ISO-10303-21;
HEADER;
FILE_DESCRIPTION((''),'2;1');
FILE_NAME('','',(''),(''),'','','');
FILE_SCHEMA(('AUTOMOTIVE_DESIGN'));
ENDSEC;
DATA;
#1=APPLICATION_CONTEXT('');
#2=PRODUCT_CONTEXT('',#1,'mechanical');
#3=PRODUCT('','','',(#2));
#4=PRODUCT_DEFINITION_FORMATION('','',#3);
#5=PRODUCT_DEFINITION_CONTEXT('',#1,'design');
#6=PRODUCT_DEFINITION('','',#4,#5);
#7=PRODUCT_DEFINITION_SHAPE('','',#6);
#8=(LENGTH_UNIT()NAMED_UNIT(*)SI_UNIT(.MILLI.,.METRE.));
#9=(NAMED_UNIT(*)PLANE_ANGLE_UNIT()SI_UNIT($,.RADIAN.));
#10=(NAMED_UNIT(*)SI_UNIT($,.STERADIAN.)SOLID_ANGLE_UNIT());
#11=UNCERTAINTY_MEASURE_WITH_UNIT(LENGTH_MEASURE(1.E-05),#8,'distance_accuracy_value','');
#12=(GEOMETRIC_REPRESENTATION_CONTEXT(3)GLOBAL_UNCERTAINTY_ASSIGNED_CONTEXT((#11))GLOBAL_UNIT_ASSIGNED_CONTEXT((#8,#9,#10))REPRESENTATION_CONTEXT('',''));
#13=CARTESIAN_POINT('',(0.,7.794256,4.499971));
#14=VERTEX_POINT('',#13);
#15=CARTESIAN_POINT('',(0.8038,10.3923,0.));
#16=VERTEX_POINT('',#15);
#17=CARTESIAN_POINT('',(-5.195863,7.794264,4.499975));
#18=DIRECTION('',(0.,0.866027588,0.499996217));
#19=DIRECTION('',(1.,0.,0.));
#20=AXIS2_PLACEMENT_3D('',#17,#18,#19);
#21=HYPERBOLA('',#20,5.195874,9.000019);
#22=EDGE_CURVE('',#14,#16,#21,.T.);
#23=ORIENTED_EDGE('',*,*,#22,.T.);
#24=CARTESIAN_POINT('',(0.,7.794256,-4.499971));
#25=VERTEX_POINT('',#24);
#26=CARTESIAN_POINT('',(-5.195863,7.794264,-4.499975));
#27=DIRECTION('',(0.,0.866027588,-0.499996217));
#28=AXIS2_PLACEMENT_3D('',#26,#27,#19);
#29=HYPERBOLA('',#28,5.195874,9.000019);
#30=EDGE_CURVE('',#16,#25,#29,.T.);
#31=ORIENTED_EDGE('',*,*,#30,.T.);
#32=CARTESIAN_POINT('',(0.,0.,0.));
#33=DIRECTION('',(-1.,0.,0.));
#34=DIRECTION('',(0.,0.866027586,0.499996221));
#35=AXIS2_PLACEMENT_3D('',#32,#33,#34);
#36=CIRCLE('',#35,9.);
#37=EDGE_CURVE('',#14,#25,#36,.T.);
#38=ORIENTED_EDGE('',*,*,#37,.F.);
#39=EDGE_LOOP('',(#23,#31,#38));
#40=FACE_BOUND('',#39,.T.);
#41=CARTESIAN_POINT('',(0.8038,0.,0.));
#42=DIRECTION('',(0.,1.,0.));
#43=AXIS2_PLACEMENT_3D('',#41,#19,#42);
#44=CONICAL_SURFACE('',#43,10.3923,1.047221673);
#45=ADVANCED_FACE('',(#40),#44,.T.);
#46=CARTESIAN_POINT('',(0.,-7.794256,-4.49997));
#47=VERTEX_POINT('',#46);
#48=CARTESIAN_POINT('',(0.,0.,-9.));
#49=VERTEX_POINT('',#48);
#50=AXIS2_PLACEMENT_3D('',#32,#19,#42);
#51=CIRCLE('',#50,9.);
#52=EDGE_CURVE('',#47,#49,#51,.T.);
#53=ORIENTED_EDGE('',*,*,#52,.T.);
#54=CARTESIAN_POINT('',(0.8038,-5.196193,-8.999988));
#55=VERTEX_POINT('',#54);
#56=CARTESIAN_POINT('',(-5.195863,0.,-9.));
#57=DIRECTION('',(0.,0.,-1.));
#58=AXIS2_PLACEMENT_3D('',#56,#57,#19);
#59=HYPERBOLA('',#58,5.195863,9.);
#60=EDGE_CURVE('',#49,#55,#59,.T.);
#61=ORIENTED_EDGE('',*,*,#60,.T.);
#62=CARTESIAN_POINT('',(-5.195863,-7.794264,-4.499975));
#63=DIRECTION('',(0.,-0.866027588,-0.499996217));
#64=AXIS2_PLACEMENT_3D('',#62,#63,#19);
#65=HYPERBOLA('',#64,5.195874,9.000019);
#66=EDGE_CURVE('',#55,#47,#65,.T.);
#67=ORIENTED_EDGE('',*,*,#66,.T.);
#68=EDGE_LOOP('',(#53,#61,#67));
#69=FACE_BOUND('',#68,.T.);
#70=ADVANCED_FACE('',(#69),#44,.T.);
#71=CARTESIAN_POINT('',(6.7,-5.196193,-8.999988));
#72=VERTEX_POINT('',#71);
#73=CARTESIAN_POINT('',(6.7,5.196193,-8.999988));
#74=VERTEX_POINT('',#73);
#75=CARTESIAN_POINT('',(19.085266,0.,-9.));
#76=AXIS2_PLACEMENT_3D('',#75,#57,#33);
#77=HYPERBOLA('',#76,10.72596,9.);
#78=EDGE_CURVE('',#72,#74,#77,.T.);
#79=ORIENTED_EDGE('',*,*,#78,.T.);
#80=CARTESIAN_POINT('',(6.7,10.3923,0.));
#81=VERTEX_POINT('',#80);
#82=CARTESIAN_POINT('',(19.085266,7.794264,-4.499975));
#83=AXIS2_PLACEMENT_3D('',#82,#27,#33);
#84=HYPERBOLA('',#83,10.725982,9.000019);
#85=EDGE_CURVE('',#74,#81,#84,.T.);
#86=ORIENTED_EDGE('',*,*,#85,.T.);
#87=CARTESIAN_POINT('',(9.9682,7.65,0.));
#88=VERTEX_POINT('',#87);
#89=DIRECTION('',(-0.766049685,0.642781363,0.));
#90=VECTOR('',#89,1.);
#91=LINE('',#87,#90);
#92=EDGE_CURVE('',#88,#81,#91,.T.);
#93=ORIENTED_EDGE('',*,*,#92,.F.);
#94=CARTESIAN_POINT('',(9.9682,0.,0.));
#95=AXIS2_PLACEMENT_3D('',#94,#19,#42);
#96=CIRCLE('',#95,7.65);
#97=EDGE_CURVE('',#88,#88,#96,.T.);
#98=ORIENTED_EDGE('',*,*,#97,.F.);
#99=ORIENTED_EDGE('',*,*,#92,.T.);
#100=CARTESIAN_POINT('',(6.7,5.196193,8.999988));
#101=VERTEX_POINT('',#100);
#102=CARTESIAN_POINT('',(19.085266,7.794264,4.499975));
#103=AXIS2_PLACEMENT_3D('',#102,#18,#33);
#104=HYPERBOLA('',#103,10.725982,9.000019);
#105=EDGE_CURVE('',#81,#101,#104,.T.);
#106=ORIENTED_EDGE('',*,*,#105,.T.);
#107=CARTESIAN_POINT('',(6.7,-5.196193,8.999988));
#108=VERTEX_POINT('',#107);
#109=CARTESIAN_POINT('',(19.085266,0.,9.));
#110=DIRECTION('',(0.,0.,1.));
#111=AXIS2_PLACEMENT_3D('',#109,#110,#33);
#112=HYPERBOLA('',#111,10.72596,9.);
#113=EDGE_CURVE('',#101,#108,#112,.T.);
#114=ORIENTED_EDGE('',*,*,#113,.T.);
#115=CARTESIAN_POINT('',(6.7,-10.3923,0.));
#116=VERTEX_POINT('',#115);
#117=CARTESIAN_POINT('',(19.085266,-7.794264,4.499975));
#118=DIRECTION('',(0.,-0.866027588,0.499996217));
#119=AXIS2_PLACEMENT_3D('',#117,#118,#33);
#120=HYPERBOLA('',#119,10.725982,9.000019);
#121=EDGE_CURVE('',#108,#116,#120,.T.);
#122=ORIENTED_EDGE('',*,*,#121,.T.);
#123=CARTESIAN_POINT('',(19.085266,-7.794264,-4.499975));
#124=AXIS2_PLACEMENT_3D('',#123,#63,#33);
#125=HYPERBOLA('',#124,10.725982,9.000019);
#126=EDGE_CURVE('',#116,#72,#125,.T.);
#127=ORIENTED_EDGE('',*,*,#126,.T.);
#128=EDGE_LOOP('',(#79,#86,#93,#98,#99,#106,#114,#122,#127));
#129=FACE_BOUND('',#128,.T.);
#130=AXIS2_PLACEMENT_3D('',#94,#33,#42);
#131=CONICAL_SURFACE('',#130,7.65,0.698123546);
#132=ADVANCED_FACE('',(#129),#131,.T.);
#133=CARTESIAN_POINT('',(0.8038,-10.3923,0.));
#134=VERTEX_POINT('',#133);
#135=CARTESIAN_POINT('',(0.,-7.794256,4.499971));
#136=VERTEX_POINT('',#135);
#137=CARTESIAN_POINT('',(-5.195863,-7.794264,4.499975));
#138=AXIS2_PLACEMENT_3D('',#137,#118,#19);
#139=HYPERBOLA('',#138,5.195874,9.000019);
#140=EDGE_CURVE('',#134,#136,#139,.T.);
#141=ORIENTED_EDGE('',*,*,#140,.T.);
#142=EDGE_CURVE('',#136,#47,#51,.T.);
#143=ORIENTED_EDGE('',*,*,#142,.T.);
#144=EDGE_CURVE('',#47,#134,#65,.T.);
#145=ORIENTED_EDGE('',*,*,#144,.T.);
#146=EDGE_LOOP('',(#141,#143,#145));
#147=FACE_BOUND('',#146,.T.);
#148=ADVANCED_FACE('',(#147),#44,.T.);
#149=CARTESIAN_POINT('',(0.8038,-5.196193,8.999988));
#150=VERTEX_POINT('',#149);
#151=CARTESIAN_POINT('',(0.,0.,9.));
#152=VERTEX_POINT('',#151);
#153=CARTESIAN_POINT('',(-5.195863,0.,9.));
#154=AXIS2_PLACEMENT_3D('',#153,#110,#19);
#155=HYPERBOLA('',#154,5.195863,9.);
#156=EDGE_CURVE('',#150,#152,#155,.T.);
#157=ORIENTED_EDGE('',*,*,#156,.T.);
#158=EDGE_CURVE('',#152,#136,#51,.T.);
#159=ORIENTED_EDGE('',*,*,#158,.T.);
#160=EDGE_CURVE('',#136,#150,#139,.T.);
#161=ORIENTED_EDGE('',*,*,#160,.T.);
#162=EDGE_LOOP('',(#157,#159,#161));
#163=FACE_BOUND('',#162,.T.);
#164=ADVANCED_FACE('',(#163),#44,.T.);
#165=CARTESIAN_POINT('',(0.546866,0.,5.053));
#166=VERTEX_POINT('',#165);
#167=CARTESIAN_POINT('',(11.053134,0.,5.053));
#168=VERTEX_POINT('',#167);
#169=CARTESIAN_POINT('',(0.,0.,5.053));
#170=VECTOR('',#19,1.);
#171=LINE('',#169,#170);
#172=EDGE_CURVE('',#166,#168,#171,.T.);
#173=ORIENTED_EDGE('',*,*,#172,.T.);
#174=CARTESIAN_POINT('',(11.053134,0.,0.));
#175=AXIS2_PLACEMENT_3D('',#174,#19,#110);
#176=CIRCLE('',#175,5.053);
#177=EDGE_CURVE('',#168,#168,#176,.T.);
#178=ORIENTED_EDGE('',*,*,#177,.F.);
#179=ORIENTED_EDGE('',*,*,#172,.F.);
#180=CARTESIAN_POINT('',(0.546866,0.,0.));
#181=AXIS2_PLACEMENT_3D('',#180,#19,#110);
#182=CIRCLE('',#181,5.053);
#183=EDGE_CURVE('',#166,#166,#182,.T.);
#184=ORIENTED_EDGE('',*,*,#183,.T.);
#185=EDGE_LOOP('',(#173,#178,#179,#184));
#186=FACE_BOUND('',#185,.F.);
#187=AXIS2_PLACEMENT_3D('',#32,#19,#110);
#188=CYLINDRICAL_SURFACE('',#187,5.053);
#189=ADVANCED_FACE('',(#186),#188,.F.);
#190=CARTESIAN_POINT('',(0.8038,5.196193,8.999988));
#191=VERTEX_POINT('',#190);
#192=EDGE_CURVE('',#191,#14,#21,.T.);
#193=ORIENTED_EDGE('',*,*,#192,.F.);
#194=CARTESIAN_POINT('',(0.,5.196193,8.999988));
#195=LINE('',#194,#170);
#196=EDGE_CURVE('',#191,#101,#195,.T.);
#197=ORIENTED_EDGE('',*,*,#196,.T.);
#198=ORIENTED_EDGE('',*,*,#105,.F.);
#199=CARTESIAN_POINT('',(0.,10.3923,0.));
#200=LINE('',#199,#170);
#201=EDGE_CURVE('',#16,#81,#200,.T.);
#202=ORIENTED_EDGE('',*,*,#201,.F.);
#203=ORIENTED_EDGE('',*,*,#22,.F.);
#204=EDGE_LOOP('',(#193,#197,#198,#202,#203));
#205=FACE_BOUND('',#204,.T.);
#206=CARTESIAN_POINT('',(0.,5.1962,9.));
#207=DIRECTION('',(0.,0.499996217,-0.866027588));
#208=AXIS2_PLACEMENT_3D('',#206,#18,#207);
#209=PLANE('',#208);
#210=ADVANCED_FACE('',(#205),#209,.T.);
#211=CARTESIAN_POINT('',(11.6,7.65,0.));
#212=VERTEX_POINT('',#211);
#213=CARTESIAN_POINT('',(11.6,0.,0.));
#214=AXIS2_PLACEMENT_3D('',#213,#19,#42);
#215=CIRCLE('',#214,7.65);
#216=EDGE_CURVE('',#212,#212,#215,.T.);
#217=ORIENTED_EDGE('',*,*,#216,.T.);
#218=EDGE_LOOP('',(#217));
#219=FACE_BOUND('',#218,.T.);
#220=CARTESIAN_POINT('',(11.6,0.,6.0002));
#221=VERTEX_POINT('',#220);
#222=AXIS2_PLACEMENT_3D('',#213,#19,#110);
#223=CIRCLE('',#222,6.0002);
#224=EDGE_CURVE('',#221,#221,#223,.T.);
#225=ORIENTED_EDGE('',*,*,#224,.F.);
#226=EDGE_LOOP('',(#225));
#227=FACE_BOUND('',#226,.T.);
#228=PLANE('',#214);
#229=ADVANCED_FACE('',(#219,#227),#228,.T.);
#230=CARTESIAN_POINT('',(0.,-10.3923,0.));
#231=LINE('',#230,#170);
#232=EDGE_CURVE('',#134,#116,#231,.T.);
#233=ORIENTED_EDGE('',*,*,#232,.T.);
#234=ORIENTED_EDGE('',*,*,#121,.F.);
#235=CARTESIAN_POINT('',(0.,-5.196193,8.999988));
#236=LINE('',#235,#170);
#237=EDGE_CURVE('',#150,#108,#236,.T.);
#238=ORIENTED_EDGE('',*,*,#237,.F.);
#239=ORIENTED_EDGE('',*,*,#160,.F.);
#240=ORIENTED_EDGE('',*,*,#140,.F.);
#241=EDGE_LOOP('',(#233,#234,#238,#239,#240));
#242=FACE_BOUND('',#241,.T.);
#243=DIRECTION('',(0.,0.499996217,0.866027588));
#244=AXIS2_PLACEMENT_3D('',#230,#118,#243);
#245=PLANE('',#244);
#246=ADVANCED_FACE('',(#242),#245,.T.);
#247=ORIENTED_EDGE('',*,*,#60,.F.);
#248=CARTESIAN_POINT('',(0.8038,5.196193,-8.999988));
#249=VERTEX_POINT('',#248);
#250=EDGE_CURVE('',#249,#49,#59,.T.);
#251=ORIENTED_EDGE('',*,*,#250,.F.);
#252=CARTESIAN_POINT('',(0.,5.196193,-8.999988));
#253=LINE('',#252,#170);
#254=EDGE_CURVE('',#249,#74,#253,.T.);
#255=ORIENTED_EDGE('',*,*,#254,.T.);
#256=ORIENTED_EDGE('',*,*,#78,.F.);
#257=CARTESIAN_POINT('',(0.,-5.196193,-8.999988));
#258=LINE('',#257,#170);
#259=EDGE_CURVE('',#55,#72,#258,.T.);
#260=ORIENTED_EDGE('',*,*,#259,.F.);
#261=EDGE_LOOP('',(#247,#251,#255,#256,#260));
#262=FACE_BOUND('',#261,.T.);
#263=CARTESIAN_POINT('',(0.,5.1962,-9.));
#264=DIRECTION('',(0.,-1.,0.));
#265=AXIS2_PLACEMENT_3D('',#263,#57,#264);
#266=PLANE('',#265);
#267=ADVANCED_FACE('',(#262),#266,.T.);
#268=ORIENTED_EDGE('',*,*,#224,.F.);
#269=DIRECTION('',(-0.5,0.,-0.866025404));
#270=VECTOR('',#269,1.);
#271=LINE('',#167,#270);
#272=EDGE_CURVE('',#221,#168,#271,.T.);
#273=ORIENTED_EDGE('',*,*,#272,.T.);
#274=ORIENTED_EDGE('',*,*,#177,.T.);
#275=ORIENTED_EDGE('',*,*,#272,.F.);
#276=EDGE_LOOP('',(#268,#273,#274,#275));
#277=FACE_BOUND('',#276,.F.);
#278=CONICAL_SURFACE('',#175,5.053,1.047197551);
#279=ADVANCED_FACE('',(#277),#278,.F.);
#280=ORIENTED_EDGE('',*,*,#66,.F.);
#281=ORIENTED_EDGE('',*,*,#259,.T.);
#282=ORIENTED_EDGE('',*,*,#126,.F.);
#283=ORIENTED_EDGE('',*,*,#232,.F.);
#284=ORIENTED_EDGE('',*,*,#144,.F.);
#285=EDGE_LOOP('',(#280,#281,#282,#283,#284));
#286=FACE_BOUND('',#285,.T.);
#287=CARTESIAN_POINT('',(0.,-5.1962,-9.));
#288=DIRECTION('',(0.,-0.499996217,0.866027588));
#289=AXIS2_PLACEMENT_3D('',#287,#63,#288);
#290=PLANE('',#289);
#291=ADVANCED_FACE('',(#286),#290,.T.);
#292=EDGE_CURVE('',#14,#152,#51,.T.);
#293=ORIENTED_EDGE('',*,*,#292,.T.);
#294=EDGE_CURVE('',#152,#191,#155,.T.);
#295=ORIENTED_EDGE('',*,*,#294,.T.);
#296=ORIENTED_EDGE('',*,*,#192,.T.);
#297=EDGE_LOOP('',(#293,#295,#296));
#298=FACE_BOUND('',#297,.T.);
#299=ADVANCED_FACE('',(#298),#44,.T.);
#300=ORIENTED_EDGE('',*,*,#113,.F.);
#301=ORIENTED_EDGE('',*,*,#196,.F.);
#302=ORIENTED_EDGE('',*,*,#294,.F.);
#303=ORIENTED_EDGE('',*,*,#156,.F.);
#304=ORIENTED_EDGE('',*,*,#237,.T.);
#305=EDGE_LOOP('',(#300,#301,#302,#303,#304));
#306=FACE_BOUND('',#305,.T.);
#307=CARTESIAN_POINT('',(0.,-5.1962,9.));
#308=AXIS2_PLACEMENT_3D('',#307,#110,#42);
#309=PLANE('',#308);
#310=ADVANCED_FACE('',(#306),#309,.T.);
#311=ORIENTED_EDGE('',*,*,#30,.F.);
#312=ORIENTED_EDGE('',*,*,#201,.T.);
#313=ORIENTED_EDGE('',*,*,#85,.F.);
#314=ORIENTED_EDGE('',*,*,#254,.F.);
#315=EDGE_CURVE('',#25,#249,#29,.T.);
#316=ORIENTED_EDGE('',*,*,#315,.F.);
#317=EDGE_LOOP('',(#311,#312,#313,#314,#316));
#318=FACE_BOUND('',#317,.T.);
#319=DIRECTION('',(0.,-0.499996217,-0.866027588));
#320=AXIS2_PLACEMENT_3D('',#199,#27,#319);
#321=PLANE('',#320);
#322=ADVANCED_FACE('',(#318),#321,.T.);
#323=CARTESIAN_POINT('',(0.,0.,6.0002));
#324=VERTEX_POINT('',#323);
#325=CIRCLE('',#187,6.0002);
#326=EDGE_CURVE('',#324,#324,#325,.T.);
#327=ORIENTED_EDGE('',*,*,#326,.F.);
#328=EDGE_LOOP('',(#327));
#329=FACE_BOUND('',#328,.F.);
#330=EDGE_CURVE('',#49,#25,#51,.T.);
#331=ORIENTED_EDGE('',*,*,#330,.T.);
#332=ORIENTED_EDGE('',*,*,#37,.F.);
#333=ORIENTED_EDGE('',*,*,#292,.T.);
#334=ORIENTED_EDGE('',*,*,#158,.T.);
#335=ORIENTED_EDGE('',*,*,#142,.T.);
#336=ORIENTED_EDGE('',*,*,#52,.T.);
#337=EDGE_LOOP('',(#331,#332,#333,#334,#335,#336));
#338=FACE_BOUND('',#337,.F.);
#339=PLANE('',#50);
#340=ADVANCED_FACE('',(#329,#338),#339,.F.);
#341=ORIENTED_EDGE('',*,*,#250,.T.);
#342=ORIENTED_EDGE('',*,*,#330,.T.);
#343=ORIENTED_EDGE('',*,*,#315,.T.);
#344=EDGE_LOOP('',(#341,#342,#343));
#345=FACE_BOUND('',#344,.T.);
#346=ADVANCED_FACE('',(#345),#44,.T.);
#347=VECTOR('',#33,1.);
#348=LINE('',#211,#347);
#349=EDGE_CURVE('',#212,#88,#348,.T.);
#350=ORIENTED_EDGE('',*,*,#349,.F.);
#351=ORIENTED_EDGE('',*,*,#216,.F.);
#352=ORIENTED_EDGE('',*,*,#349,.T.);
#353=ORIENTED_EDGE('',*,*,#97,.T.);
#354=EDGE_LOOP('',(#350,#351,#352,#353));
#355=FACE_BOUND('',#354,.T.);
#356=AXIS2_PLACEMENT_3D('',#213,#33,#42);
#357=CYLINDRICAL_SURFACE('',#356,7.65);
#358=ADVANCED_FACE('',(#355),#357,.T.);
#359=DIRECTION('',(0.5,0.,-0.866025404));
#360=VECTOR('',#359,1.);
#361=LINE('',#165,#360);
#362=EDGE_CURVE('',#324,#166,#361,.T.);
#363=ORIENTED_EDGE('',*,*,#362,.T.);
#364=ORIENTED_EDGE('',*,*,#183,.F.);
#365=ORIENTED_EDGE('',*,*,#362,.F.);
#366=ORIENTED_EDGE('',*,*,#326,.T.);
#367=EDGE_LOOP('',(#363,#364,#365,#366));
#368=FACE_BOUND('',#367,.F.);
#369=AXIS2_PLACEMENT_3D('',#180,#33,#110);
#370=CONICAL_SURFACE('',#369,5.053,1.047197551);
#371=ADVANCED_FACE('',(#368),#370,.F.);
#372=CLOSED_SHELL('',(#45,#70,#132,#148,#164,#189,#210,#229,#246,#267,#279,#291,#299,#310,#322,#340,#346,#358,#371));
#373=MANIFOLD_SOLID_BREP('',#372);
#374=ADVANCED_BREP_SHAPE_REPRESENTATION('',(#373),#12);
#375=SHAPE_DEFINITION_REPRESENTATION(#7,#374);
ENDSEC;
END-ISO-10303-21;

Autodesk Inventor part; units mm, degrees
ref_plane "YZ Plane" through (0, 0, 0) normal (1, 0, 0) x (0, 1, 0)
ref_plane "XZ Plane" through (0, 0, 0) normal (0, 1, 0) x (-1, 0, 0)
sketch "Náčrt1" plane through (0, 0, 0) normal (1, 0, 0) x (0, 1, 0)
  line L0 (-10.3923, 0) -> (-5.1962, 9)
  line L1 (-5.1962, 9) -> (5.1962, 9)
  line L2 (5.1962, 9) -> (10.3923, 0)
  line L3 (10.3923, 0) -> (5.1962, -9)
  line L4 (5.1962, -9) -> (-5.1962, -9)
  line L5 (-5.1962, -9) -> (-10.3923, 0)
  point P0 (0, 0)
  point P1 (0, 0)
  dimension "d0" = 20.7846
extrude "Těleso" add sketch "Náčrt1" along normal blind 11.6
sketch "Náčrt2" plane through (0, 0, 0) normal (-1, 0, 0) x (0, 0, 1)
  line L0 (0, -14.5492) -> (0, 14.5492) projected
  line L1 (-12.6, 0) -> (12.6, 0) projected
  point P0 (0, 0)
hole "Závit" at (0, 0, 0) direction (1, 0, 0) diameter 10.106 end through all thread size "M12x1.75" class "6H" standard "ANSI Metric M Profile"
chamfer "Zkosení1" distance 0.9472 angle 30 1 edges at (0, 0, -5.053) measured on face at (0, -6.5823, -3.9568)
chamfer "Zkosení2" distance 0.9472 angle 30 1 edges at (11.6, 0, -5.053) measured on face at (11.6, -6.5823, -3.9568)
sketch "Náčrt3" plane through (0, 0, 0) normal (0, 0, 1) x (1, 0, 0)
  line L0 (0, 5.1962) -> (0, 10.3923) projected
  line L1 (0, 10.3923) -> (11.6, 10.3923) projected
  line L2 (11.6, 5.1962) -> (11.6, 10.3923) projected
  line L3 (-2.32, 0) -> (13.92, 0) projected
  line L4 (0.8038, 10.3923) -> (0, 9)
  line L5 (11.6, 7.65) -> (9.9682, 7.65)
  line L6 (9.9682, 7.65) -> (6.7, 10.3923)
  dimension "d3" = 30
  dimension "d5" = 18
  dimension "d6" = 15.3
  dimension "d8" = 50
  dimension "d9" = 6.7
revolve "Zkosení3" cut sketch "Náčrt3" angle 360 about axis through (-10, 0, 0) along (1, 0, 0)
ref_plane "Work Plane1" through (29.8423, 0, 0) normal (0, 0, 1) x (-1, 0, 0)
equation "\"d0\" = 1.1547 * SW"
equation "\"d1\" = KOH"
equation "\"d3\" = ANG1"
equation "\"d5\" = SW0"
equation "\"d6\" = SW1"
equation "\"d8\" = ANG2"
equation "\"d9\" = KOH1"
equation "\"d10\" = -0.5 * GD1 + 0.5 * NND"
equation "\"d39\" = -0.5 * GD1 + 0.5 * NND"
equation "\"d12\" = -0.5 * GD1 + 0.5 * NND"
equation "\"d40\" = -0.5 * GD1 + 0.5 * NND"
equation "\"ANG1\" = 30deg"
equation "\"ANG2\" = 50deg"
equation "\"NND\" = 12"
equation "\"KOH\" = 11.6"
equation "\"SW\" = 18"
equation "\"SW0\" = SW"
equation "\"SW1\" = 0.85 * SW"
equation "\"KOH1\" = 6.7"
equation "\"GUL\" = 0.541266 * PTC"
equation "\"THREADDIA\" = 12"
equation "\"TOA\" = 30deg"
equation "\"PTC\" = 1.75"
equation "\"E0\" = 1.155 * SW"
equation "\"GAL\" = 0.541266 * PTC"
equation "\"GD1\" = 10.105569"
properties part number "ANSI B18.16.3M - Property Class 5 and 10 - Metric M12 x 1.75 Typ kovu" material "Ocel, měkká"
